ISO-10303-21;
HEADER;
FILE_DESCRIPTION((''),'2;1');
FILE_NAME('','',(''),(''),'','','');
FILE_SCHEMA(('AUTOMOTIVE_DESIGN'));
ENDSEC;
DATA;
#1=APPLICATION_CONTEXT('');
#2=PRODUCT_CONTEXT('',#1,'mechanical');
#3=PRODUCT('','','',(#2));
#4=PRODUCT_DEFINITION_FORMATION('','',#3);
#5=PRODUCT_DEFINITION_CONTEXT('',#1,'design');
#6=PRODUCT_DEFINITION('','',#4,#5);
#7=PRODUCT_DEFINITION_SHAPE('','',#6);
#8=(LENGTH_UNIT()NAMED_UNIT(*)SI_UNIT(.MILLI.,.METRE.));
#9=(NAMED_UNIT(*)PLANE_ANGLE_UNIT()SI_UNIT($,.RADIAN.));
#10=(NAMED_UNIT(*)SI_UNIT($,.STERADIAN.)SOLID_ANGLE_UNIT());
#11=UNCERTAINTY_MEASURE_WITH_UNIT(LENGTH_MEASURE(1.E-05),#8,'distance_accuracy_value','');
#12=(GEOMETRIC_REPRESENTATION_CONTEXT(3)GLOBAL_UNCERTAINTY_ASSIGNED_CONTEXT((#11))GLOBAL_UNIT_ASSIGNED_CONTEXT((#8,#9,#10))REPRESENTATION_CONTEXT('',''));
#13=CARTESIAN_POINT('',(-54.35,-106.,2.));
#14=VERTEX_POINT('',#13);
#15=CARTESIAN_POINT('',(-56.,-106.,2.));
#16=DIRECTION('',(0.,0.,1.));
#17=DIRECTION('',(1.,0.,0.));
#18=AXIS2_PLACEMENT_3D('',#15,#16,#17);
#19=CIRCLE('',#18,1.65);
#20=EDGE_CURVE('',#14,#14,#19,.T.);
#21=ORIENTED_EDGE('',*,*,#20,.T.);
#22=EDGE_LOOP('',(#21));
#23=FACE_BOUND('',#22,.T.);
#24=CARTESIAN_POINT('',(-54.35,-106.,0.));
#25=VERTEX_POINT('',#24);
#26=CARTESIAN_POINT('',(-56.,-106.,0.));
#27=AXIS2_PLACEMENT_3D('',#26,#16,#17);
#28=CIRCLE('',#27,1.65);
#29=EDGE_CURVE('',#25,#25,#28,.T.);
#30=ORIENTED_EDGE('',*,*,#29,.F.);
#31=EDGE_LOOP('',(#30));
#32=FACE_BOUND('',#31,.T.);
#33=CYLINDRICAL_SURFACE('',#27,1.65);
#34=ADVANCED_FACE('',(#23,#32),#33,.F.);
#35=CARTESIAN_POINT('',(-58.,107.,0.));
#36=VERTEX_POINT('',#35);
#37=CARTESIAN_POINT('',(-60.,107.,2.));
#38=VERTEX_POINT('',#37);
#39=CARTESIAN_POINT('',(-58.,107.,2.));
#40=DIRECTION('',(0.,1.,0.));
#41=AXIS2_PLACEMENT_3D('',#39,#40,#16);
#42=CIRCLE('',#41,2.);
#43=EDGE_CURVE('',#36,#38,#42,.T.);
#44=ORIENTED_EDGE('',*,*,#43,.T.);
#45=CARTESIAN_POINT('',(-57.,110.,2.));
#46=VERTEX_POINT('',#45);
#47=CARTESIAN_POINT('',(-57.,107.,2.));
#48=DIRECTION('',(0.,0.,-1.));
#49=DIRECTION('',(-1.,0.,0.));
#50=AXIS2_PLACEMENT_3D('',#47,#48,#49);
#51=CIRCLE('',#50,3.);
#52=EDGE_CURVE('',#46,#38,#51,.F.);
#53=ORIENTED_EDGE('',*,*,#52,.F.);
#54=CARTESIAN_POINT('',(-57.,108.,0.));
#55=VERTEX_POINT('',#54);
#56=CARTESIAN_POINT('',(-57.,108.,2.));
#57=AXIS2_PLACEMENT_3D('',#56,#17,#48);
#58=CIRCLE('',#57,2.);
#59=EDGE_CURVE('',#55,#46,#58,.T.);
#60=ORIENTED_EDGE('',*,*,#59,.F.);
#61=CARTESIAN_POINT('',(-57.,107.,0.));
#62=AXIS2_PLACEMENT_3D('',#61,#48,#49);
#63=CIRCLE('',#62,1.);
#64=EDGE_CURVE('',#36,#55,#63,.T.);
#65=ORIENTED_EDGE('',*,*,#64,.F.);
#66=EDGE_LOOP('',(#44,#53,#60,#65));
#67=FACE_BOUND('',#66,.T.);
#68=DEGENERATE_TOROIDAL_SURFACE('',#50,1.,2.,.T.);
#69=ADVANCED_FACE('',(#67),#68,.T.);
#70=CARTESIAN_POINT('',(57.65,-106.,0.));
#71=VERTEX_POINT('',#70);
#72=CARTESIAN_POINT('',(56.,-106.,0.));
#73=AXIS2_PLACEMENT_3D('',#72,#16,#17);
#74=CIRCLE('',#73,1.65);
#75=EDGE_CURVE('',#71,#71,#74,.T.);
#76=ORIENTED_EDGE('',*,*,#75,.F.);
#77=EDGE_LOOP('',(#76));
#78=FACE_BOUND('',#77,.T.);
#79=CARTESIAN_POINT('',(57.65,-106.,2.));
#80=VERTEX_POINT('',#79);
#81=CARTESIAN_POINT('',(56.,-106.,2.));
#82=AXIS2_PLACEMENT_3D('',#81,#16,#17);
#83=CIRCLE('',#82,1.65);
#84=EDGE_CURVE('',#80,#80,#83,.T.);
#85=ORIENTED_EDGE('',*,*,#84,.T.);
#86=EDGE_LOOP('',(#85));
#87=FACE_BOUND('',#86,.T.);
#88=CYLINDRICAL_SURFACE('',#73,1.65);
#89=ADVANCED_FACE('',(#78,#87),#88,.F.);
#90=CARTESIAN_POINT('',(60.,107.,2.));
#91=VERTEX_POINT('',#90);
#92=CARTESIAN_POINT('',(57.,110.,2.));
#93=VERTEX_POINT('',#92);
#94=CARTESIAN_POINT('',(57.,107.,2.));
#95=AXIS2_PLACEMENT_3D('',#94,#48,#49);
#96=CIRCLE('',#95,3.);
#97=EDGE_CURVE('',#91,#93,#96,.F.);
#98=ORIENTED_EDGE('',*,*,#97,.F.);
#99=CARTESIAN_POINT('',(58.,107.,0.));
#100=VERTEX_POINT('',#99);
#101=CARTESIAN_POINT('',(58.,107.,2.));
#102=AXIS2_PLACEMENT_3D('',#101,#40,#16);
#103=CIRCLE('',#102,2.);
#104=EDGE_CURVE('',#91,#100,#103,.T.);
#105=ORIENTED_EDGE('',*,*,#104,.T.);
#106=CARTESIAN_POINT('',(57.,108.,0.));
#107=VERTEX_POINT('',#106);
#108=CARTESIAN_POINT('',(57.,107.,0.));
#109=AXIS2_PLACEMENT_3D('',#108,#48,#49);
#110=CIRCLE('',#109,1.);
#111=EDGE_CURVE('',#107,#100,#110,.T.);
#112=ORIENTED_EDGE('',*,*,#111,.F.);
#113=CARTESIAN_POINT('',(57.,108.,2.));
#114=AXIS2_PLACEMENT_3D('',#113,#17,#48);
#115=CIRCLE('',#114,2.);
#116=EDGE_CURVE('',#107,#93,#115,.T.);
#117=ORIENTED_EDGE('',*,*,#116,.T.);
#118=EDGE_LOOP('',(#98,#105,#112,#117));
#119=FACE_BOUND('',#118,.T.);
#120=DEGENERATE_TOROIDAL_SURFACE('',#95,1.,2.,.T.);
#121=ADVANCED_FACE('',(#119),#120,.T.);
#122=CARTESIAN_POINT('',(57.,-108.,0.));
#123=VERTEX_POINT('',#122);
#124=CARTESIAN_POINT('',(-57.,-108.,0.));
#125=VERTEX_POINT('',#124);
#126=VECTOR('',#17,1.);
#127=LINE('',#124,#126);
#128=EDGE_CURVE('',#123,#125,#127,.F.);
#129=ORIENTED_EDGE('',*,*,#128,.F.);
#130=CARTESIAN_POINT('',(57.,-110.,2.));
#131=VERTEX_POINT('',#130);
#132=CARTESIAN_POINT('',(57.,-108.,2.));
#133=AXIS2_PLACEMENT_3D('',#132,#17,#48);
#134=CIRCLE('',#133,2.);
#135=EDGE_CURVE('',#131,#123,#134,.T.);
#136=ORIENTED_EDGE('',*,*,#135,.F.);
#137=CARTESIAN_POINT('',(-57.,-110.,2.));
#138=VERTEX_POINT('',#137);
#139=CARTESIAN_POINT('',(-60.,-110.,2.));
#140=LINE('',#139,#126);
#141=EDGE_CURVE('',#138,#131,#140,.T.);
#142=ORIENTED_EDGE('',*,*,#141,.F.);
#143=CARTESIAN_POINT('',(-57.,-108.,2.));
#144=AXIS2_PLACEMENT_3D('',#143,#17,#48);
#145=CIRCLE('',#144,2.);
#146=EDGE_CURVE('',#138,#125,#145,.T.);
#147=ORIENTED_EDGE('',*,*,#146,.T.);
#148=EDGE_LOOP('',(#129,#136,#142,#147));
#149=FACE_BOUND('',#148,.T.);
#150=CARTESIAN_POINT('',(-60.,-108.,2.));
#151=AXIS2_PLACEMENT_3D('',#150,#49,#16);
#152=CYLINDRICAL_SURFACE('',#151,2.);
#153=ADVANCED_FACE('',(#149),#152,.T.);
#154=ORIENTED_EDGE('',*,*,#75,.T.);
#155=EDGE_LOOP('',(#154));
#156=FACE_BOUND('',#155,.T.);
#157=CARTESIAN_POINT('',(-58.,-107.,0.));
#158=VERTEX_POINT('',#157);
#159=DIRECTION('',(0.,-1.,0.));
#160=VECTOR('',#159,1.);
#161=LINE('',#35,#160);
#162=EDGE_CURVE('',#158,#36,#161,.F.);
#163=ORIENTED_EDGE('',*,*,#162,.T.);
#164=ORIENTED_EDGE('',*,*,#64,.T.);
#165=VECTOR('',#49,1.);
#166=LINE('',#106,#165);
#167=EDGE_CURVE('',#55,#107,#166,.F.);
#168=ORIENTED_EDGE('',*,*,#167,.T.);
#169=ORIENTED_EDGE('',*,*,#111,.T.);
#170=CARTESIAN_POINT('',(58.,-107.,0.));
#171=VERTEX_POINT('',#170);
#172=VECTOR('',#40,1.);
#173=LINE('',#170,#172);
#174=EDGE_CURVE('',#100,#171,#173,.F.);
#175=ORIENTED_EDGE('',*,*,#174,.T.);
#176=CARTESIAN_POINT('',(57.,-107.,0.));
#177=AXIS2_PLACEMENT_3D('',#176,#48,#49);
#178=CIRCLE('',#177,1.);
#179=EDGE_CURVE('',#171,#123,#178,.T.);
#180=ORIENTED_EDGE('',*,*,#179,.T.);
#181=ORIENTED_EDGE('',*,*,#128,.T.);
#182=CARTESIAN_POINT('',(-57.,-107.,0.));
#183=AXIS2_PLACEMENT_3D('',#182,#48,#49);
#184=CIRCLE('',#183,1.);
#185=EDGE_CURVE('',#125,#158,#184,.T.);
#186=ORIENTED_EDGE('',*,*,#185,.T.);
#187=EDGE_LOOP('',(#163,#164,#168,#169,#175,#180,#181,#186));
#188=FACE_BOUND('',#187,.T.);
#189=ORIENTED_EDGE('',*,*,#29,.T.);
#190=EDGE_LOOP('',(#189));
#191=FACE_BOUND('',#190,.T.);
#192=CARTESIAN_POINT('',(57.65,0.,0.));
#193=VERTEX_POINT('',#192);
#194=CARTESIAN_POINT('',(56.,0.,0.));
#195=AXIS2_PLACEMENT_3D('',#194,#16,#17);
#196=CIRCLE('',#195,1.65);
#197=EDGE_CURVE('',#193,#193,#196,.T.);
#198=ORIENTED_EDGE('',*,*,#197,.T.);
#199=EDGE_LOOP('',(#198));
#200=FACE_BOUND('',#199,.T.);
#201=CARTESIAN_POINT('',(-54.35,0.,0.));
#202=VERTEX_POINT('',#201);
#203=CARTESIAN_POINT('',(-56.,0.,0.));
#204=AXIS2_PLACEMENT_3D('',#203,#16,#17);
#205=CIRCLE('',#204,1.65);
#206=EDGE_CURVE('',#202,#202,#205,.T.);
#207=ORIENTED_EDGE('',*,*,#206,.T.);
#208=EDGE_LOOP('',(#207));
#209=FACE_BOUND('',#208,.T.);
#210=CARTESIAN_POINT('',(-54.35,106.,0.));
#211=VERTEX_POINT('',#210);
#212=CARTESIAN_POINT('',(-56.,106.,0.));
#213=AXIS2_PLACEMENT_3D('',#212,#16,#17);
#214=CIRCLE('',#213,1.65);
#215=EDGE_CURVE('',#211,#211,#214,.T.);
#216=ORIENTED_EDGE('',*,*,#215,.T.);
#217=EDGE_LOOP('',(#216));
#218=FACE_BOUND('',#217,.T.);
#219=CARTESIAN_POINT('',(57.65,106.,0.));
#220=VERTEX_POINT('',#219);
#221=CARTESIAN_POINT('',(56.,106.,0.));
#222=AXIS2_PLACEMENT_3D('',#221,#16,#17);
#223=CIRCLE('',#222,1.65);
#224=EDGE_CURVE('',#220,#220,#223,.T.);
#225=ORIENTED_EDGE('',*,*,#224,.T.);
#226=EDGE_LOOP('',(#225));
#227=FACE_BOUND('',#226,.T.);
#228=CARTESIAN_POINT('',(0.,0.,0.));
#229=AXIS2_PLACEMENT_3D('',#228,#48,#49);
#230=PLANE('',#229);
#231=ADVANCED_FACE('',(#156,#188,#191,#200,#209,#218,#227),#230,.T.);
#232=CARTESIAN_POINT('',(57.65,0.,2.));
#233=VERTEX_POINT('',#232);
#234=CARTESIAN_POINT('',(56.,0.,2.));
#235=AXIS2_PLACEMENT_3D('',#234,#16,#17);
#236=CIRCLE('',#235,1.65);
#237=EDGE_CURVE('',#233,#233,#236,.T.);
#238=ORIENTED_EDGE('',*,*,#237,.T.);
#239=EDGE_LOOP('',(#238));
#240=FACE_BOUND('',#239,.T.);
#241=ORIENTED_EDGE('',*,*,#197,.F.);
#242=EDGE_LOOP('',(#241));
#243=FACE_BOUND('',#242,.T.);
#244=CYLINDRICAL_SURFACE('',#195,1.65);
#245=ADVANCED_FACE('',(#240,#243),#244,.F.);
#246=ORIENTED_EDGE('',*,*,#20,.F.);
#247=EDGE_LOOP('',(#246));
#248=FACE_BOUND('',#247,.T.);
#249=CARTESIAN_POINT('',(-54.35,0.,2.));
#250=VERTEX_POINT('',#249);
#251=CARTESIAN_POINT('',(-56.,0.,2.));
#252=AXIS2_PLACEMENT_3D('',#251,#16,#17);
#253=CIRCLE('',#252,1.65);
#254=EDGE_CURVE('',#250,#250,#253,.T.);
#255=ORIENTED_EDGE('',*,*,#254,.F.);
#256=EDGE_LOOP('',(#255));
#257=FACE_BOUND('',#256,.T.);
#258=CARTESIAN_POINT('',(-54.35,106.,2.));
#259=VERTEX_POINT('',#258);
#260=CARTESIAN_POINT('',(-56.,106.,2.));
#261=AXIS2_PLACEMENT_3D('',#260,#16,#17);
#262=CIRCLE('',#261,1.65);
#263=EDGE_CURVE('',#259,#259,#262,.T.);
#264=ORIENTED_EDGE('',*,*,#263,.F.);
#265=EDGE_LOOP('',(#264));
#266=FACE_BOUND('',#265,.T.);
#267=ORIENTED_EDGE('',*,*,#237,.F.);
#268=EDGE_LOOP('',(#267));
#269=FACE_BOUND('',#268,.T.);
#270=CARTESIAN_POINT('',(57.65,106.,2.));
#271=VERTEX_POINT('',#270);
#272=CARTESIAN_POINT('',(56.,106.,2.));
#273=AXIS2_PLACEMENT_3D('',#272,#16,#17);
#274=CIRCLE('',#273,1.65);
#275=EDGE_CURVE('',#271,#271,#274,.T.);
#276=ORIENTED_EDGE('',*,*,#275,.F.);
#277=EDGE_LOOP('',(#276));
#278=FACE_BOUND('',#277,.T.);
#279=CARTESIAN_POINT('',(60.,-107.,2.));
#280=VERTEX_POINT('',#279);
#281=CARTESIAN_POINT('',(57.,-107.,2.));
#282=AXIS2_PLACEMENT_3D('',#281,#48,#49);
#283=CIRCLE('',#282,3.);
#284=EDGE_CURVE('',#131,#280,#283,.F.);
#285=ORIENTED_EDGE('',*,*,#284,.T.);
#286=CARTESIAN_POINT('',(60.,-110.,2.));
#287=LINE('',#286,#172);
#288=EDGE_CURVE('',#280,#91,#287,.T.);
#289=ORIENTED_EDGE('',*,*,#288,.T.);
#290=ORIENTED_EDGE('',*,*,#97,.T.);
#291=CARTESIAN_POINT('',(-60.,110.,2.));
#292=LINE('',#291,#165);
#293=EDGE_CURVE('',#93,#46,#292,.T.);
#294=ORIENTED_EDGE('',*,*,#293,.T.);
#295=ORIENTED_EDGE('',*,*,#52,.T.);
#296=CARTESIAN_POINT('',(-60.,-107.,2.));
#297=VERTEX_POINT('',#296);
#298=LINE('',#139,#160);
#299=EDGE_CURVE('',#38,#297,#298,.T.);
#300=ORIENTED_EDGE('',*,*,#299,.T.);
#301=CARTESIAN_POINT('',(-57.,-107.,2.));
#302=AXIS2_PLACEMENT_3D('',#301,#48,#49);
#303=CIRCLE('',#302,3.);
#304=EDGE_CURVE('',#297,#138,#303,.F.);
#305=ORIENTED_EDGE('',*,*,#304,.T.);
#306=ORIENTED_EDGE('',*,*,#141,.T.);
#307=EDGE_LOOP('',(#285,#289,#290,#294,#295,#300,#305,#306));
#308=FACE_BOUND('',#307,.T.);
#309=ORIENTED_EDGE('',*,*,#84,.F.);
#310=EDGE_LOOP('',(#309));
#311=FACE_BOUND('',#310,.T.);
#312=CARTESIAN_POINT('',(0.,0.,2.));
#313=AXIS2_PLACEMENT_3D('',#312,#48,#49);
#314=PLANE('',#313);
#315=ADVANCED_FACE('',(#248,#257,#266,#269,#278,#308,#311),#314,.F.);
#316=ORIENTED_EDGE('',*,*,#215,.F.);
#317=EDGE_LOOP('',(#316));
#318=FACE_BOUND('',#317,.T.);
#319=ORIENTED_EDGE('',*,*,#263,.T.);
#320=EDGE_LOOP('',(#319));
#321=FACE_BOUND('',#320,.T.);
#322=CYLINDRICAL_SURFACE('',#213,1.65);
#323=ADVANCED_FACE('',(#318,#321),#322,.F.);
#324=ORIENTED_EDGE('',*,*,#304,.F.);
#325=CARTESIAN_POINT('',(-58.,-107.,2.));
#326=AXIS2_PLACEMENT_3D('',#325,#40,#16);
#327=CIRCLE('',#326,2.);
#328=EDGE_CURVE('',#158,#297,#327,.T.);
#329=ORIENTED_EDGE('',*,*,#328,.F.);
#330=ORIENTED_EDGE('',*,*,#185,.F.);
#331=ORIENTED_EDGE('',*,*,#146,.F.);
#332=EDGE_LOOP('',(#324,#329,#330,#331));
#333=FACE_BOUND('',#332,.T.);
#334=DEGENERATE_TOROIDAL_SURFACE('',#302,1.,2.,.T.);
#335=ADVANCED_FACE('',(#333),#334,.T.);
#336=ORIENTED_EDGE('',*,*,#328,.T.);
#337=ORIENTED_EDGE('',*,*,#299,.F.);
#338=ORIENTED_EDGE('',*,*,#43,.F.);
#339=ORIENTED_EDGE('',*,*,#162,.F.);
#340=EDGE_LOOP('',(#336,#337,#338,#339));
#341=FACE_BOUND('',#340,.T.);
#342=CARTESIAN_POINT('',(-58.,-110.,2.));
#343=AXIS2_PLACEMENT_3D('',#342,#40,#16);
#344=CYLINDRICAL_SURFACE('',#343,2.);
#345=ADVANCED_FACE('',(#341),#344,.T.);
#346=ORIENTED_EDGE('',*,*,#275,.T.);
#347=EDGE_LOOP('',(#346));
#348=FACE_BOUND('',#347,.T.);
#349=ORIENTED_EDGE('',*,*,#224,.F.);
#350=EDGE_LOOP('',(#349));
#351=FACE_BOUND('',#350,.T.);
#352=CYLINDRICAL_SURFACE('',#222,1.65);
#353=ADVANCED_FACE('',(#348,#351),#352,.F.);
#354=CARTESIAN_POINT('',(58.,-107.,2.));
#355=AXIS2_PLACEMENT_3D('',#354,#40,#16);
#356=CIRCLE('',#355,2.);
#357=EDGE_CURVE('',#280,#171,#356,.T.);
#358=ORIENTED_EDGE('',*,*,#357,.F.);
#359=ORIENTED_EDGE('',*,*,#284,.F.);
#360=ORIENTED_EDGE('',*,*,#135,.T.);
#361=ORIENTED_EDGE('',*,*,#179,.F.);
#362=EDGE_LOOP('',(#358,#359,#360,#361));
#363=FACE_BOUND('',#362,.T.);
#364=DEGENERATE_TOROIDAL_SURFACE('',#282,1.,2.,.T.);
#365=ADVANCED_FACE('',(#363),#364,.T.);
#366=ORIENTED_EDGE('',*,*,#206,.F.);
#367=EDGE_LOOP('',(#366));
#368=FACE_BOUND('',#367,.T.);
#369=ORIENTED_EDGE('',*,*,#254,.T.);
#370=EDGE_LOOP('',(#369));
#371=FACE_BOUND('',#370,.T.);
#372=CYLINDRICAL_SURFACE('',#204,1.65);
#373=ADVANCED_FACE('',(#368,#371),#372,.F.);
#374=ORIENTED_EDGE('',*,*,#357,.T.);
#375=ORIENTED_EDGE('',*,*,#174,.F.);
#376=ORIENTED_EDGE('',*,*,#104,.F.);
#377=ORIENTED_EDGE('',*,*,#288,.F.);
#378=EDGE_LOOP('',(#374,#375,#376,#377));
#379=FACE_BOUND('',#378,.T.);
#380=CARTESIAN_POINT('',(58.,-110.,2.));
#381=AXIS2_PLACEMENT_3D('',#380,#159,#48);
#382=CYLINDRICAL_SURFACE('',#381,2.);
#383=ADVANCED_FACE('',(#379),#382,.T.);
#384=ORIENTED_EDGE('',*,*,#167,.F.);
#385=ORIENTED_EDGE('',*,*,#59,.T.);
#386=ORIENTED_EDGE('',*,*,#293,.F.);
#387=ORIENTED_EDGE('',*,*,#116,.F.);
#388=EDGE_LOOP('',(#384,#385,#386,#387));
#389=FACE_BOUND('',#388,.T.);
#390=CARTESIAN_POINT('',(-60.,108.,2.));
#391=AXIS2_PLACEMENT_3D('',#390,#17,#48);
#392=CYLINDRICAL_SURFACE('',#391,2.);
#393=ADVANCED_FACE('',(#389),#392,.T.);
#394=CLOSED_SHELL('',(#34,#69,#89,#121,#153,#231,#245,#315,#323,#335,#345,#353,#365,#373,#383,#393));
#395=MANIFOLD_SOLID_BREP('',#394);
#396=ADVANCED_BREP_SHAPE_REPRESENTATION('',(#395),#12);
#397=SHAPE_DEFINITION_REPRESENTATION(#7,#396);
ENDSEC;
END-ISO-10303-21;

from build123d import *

# Parameters (mm, degrees)
SKETCH1_W           = 120
SKETCH1_H           = 220
BOSS_EXTRUDE1_DEPTH = 2
SKETCH3_R           = 1.65
CUT_EXTRUDE1_DEPTH  = 126.315601583
FILLET3_R           = 3
FILLET1_R           = 2


with BuildPart() as part:
    # Sketch1 → Boss-Extrude1 (new body)
    with BuildSketch(Plane.XY):
        Rectangle(SKETCH1_W, SKETCH1_H)
    extrude(amount=BOSS_EXTRUDE1_DEPTH)

    # Sketch3 → Cut-Extrude1 (cut, through all)
    with BuildSketch(Plane.XY.offset(2)):
        with Locations((56, 106)):
            Circle(SKETCH3_R)
        with Locations((-56, 106)):
            Circle(SKETCH3_R)
        with Locations((-56, 0)):
            Circle(SKETCH3_R)
        with Locations((-56, -106)):
            Circle(SKETCH3_R)
        with Locations((56, -106)):
            Circle(SKETCH3_R)
        with Locations((56, 0)):
            Circle(SKETCH3_R)
    extrude(amount=-CUT_EXTRUDE1_DEPTH, mode=Mode.SUBTRACT)

    # Fillet3
    fillet3_edges = [part.edges().sort_by_distance(p)[0] for p in [
        (60, -110, 1),
        (-60, -110, 1),
        (-60, 110, 1),
        (60, 110, 1),
    ]]
    fillet(fillet3_edges, radius=FILLET3_R)

    # Fillet1
    fillet1_edges = [part.edges().sort_by_distance(p)[0] for p in [
        (-60, 0, 0),
        (0, -110, 0),
        (60, 0, 0),
        (0, 110, 0),
        (59.121320344, 109.121320344, 0),
        (59.121320344, -109.121320344, 0),
        (-59.121320344, -109.121320344, 0),
        (-59.121320344, 109.121320344, 0),
    ]]
    fillet(fillet1_edges, radius=FILLET1_R - 0.0001)  # a hair under: the kernel refuses the full size


solid = part.part
